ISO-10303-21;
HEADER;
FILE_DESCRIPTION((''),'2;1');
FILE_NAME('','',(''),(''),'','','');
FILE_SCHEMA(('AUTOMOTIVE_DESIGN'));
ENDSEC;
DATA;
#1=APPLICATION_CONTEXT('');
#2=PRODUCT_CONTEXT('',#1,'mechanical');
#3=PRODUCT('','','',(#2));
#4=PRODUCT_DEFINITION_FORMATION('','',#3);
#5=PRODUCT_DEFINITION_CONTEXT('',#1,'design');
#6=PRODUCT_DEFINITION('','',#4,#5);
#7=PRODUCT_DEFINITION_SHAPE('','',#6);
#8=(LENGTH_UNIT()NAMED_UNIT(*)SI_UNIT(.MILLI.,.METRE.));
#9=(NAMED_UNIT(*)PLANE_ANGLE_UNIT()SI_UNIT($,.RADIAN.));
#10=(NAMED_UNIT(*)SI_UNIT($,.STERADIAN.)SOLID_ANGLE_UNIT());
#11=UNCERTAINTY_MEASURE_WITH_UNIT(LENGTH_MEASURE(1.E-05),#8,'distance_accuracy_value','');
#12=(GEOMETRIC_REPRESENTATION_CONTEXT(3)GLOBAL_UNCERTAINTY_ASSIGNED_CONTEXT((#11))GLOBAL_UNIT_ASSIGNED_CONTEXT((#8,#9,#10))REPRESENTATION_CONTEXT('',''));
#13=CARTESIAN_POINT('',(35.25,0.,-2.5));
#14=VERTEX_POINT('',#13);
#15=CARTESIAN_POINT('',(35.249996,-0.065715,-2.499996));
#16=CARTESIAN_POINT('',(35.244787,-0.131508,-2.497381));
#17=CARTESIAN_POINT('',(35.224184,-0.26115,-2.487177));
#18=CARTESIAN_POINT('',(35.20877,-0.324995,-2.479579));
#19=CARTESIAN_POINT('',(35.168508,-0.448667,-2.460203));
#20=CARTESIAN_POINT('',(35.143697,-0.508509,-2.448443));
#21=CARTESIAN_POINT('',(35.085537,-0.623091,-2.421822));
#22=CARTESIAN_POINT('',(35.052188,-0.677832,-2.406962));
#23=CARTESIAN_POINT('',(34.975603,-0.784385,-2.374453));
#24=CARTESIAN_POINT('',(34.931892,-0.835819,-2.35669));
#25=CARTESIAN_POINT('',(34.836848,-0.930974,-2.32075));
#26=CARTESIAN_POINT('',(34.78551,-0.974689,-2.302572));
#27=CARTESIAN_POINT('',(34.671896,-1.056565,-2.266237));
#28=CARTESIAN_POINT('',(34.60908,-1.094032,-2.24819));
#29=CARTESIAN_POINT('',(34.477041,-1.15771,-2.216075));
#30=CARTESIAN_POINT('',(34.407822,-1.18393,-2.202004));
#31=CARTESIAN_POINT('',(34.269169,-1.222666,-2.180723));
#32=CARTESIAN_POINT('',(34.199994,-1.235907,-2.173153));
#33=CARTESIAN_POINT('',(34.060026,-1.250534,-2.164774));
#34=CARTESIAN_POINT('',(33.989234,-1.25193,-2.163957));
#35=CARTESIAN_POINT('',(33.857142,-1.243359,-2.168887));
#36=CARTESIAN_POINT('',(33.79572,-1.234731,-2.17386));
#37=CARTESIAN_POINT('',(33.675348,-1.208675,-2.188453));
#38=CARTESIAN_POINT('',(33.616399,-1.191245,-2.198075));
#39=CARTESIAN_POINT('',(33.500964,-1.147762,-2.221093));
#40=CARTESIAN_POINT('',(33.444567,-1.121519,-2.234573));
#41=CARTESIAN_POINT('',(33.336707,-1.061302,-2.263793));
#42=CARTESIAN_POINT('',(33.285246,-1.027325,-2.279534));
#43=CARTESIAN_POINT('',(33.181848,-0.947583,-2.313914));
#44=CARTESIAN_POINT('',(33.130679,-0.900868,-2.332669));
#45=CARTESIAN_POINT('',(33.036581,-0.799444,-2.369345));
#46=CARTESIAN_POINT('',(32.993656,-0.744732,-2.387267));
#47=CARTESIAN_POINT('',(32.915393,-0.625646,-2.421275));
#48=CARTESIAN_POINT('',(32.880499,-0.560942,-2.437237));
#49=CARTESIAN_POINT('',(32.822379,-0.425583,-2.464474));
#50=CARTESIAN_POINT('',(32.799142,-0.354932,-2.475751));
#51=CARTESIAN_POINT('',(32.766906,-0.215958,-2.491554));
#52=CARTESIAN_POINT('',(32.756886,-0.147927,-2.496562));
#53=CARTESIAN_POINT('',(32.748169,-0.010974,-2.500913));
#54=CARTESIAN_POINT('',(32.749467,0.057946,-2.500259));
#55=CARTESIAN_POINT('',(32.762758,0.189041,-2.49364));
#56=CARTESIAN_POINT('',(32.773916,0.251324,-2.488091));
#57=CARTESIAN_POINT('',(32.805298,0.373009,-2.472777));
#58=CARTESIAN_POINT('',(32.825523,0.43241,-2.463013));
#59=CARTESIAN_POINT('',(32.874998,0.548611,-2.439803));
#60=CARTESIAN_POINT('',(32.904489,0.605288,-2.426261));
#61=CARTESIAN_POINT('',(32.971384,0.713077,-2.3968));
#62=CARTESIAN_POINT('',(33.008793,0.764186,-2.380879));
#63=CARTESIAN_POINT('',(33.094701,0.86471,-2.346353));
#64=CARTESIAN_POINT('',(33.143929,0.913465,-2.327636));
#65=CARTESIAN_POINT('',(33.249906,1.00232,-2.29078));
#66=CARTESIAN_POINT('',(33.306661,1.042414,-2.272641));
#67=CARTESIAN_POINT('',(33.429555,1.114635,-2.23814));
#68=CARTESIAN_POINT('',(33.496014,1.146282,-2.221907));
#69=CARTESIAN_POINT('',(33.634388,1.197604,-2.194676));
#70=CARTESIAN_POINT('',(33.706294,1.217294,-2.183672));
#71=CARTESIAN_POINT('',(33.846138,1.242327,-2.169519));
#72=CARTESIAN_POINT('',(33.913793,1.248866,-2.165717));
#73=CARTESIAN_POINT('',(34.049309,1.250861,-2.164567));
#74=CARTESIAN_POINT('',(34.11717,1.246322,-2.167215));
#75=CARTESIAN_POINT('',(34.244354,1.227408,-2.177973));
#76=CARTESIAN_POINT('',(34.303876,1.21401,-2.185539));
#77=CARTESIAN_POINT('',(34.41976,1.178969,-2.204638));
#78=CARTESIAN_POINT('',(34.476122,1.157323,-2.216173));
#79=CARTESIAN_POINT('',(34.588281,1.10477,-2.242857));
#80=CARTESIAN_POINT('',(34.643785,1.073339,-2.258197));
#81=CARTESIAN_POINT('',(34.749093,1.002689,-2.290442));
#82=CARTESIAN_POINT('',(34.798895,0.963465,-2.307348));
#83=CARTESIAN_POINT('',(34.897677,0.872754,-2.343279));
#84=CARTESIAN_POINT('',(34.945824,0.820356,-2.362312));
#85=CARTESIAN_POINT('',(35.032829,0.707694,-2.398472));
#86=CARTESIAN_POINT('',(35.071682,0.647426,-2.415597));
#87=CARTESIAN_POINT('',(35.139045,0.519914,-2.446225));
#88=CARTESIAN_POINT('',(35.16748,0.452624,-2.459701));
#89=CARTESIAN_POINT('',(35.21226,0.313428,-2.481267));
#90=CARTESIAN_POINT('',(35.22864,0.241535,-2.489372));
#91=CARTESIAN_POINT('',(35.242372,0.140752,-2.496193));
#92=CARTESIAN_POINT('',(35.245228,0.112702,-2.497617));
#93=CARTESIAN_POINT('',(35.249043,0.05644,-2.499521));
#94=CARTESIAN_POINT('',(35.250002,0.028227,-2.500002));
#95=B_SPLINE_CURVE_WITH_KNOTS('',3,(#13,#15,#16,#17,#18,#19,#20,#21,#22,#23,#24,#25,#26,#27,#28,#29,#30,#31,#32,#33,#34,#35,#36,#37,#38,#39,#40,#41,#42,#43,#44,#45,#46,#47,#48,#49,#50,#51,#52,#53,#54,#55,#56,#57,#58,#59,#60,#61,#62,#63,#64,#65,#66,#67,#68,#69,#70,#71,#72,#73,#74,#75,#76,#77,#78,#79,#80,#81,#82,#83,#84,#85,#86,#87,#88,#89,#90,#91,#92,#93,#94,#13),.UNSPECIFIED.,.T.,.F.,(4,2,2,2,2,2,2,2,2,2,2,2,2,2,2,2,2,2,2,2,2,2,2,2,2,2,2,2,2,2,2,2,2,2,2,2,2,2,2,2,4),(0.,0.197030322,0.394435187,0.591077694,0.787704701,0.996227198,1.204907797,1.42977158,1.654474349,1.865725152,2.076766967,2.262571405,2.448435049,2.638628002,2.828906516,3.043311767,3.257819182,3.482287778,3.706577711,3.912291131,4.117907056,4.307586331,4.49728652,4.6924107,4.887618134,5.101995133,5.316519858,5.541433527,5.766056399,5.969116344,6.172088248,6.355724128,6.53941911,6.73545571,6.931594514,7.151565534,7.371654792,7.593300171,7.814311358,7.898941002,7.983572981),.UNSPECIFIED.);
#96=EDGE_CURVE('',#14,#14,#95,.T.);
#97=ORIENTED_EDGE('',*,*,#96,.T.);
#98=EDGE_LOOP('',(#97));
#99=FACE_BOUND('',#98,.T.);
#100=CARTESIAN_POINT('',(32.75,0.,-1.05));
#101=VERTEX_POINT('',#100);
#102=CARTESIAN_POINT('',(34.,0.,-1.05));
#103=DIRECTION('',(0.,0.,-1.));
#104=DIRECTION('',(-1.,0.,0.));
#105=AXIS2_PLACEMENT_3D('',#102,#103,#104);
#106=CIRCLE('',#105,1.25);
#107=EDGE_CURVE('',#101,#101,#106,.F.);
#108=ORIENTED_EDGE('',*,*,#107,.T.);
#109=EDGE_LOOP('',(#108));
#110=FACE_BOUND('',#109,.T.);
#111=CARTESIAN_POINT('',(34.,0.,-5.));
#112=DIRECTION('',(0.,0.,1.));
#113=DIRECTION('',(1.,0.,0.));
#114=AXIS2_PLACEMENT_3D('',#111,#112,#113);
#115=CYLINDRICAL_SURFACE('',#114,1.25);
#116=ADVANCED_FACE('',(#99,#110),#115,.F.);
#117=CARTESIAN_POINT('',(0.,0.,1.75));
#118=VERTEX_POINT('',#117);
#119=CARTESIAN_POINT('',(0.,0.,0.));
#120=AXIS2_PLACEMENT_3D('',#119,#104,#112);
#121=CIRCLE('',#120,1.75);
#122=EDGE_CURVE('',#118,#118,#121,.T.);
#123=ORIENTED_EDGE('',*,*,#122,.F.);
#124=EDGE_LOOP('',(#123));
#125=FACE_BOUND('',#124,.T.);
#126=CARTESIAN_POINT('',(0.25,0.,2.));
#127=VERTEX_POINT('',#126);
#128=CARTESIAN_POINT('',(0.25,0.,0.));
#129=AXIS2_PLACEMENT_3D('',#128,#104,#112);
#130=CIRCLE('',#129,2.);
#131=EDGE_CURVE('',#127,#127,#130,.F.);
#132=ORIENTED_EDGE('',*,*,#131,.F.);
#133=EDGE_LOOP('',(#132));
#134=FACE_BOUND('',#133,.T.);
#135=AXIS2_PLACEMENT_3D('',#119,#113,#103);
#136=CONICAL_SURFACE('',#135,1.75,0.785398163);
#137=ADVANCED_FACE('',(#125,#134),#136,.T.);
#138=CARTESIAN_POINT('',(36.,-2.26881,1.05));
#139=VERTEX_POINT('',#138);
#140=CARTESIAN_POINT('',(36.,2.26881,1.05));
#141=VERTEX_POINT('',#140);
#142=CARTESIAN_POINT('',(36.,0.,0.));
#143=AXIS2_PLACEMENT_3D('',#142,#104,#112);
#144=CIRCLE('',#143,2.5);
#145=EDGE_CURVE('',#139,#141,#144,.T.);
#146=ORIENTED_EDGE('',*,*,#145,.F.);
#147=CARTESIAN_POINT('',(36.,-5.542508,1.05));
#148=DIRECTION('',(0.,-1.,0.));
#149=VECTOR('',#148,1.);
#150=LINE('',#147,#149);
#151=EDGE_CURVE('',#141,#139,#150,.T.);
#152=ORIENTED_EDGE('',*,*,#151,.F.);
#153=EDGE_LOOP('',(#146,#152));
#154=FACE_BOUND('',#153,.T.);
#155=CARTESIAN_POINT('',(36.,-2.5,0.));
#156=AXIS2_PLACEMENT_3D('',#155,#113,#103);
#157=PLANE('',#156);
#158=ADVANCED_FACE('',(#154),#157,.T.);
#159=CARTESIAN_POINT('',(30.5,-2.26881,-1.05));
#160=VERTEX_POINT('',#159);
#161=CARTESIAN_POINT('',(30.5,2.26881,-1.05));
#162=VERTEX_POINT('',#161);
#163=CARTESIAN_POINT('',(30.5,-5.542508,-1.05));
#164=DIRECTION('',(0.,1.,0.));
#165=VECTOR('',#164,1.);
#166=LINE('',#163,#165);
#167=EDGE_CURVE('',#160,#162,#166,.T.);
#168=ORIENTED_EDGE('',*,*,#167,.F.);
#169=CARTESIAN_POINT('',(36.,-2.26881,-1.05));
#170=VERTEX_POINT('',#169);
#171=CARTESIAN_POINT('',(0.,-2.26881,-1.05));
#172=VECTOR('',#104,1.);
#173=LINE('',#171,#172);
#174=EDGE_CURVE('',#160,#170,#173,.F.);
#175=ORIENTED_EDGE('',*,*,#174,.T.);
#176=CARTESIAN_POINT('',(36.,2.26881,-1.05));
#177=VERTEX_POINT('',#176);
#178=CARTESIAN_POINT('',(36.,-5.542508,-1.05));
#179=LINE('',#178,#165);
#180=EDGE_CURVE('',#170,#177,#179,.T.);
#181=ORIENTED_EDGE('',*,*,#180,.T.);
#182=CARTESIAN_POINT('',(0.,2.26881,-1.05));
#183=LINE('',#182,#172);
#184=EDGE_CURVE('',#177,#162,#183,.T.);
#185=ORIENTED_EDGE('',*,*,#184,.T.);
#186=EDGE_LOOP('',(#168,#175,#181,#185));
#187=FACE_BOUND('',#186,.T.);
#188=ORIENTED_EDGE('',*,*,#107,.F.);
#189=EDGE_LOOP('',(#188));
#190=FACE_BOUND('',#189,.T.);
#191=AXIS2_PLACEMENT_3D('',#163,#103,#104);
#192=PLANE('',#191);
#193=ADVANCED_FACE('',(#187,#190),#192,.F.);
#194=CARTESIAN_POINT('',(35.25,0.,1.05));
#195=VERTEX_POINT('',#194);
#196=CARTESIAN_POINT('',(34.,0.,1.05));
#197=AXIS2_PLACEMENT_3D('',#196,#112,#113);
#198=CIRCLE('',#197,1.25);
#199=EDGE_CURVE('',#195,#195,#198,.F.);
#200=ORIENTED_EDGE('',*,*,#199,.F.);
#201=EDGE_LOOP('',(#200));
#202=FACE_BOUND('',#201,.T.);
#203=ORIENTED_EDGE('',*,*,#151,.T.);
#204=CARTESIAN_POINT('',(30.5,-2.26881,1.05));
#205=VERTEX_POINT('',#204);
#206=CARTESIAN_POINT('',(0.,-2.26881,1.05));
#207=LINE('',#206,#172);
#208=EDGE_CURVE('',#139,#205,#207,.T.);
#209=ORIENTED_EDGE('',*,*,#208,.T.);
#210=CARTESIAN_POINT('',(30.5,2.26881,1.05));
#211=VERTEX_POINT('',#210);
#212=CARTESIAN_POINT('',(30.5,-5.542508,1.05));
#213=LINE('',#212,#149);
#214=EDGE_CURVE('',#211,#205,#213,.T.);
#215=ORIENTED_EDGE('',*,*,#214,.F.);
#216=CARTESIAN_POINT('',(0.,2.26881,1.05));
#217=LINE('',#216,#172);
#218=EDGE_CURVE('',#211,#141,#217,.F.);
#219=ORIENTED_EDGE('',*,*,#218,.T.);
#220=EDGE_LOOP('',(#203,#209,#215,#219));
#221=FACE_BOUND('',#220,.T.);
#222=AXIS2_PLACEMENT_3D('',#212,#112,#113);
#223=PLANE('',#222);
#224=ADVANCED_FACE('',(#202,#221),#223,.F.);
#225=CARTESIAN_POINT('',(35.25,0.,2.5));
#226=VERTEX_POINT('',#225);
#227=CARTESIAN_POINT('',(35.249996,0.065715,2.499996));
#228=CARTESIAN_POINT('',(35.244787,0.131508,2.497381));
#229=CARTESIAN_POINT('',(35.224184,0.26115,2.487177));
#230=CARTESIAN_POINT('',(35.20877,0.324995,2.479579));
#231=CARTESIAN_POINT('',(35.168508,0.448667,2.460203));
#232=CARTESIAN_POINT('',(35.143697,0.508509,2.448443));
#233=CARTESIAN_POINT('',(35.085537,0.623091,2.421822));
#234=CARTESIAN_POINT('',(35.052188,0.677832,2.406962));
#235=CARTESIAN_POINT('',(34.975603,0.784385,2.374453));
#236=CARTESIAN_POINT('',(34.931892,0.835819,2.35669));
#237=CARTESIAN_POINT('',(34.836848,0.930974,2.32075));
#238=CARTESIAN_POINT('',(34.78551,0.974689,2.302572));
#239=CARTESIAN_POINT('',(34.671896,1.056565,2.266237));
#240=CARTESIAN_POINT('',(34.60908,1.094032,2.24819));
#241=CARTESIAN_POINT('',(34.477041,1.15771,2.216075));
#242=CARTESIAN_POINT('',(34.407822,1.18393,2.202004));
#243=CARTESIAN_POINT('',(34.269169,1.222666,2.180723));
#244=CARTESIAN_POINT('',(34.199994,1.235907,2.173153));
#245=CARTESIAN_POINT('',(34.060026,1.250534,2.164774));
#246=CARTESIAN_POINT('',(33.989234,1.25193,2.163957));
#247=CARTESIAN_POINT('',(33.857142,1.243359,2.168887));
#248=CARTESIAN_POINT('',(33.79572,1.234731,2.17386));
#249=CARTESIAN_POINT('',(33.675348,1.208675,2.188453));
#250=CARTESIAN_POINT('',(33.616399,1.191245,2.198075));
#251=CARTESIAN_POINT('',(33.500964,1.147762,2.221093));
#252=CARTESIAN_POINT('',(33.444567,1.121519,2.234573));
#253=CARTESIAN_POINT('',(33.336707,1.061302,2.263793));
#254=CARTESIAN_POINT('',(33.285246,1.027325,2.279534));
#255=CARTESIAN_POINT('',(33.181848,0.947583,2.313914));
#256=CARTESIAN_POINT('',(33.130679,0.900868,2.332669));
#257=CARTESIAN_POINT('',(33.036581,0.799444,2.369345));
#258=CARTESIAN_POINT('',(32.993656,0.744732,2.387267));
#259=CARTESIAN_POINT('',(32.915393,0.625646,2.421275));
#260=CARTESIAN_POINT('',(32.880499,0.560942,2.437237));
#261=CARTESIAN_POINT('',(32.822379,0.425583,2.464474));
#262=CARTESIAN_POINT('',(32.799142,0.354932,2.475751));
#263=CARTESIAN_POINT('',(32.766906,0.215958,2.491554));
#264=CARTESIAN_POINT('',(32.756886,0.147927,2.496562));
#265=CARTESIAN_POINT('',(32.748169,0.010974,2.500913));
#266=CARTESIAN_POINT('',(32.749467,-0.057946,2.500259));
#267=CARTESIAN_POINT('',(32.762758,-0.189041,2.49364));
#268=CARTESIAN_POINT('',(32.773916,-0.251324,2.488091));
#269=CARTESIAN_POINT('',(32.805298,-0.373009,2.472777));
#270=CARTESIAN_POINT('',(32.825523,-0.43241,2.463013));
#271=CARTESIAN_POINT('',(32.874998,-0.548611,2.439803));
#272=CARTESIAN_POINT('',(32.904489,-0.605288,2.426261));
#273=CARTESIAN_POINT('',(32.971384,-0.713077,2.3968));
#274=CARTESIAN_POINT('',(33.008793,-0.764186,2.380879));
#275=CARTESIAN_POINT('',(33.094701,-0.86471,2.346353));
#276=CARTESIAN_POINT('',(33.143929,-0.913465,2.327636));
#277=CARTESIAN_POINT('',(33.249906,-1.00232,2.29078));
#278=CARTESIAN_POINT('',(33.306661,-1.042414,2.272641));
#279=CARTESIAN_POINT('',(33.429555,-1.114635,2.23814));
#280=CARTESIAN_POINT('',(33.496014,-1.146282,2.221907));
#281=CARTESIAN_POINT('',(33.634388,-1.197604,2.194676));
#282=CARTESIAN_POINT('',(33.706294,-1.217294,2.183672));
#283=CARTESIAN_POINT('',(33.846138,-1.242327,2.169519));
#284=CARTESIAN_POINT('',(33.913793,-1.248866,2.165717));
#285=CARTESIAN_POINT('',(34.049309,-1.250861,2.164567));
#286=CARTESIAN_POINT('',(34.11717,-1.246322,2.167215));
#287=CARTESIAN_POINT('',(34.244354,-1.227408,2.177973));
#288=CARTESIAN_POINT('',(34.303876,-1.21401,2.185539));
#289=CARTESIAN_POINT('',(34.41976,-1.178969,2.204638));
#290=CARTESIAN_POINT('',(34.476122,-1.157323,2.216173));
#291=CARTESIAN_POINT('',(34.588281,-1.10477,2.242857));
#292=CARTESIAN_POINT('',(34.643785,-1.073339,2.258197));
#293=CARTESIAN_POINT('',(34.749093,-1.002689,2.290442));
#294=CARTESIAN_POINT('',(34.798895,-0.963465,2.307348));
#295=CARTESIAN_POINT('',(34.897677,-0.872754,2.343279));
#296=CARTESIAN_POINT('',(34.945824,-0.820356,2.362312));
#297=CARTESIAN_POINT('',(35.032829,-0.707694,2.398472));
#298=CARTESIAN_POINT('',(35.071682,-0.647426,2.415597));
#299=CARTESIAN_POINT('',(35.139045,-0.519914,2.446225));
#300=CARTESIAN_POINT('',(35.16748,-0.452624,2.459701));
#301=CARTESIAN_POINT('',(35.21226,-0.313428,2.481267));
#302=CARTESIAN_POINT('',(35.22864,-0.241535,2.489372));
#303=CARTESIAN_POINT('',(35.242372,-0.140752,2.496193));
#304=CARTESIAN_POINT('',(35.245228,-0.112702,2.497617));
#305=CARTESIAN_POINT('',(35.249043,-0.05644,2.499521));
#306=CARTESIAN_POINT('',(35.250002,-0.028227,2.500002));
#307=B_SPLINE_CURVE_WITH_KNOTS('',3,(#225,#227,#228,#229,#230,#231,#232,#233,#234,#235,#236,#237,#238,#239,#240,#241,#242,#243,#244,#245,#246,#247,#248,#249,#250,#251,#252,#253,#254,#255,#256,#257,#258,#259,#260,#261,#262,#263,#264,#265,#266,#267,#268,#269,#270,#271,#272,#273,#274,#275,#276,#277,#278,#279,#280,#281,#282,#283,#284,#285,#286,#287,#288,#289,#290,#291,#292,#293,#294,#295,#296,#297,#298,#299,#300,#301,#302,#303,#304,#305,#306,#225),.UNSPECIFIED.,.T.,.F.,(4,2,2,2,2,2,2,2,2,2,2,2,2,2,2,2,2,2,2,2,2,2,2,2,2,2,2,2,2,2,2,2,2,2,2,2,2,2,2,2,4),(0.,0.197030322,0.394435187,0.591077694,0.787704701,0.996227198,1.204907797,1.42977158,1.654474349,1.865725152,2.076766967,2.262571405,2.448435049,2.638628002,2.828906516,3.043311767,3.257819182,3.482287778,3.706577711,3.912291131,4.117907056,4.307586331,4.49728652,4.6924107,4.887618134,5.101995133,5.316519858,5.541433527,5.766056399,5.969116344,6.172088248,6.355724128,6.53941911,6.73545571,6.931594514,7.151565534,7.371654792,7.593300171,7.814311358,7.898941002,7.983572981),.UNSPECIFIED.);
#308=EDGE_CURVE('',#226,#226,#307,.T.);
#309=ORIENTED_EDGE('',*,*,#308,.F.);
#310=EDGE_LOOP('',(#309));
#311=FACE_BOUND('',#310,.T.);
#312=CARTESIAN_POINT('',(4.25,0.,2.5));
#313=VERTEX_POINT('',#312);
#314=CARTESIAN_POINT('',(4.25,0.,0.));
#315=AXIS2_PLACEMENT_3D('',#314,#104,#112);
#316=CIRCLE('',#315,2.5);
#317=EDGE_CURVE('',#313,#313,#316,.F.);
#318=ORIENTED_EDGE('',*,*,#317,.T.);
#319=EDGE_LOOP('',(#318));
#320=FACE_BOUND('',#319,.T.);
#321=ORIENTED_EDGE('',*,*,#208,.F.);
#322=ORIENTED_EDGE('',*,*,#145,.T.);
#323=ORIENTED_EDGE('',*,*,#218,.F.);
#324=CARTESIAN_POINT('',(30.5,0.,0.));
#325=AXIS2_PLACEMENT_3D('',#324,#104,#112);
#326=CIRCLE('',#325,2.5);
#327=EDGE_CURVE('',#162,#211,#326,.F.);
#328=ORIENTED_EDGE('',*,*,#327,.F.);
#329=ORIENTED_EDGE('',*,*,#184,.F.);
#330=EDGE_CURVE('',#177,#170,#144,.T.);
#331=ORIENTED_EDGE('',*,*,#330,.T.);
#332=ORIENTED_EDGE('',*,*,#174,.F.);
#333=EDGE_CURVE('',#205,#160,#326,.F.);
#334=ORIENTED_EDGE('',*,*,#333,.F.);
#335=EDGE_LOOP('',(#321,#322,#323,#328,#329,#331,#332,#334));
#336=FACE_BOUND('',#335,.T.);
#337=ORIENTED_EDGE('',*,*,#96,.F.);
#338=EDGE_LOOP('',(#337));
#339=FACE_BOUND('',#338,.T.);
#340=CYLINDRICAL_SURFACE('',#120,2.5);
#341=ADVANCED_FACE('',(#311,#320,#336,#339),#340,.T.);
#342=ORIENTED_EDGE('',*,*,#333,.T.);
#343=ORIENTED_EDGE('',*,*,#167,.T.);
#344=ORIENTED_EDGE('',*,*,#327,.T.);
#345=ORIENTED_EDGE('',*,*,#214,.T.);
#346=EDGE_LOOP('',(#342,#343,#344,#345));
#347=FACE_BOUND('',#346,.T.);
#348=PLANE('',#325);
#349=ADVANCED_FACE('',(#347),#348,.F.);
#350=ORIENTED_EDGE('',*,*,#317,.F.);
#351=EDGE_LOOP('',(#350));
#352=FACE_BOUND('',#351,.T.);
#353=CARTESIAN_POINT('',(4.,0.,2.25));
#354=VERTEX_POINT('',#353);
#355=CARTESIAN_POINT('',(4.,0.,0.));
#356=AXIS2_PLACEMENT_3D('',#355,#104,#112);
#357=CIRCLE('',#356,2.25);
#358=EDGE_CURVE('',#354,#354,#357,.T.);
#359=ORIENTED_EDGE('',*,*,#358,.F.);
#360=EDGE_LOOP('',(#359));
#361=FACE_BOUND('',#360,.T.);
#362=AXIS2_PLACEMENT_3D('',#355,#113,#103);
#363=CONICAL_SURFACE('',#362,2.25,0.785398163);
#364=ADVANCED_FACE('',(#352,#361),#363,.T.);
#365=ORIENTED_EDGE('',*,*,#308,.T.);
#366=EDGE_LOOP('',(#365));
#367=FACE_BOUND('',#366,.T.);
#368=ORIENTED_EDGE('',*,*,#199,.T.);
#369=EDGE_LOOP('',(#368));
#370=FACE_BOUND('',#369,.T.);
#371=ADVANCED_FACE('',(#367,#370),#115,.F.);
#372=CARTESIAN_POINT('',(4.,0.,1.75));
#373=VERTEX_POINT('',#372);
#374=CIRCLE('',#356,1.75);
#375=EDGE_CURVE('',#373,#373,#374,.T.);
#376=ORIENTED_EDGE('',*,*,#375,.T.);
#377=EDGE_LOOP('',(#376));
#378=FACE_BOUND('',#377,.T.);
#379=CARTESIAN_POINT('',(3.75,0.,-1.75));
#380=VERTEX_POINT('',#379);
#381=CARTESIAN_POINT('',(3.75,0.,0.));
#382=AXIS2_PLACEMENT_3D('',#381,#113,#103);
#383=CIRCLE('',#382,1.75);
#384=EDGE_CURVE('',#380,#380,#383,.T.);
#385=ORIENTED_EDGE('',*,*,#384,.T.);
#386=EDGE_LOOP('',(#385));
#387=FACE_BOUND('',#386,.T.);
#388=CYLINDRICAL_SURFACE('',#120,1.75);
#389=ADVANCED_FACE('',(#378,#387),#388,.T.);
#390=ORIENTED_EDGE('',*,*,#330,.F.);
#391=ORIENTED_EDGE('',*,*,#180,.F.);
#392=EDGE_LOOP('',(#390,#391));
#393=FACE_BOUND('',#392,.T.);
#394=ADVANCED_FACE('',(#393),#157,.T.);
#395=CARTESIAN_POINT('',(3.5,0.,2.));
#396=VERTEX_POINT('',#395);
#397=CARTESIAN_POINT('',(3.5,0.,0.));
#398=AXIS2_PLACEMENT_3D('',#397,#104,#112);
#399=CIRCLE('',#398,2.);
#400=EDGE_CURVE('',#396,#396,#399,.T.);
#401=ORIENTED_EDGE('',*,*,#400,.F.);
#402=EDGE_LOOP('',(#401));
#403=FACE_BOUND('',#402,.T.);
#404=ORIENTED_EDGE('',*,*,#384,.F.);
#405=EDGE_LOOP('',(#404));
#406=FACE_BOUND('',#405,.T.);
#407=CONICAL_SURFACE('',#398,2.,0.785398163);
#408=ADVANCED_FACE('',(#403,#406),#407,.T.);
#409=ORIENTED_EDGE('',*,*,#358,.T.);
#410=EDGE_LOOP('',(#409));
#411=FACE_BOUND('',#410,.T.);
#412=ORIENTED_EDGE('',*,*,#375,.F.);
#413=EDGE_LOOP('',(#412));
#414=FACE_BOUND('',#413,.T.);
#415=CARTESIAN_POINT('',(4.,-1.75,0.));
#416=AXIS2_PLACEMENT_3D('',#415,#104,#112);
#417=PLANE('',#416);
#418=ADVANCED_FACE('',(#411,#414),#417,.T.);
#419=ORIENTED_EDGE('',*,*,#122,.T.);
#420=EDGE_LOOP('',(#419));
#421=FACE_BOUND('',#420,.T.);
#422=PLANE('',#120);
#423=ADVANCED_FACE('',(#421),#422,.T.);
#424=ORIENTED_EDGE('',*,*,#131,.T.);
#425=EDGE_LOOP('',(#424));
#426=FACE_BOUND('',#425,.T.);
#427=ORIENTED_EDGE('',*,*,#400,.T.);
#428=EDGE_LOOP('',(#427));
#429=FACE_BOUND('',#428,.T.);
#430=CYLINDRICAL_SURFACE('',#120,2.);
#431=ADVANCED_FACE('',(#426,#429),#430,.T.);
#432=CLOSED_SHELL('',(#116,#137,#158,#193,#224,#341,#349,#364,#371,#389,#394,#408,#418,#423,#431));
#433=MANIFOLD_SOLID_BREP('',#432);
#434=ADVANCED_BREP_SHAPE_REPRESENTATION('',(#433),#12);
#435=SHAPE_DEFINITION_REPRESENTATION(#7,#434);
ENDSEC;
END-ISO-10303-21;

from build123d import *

# Parameters (mm, degrees)
SKETCH2_R          = 1.25
CUT_EXTRUDE1_DEPTH = 5
SKETCH3_W          = 2.1
SKETCH3_H          = 11.085015624
CUT_EXTRUDE2_DEPTH = 5.5
CHAMFER1_SIZE      = 0.25


with BuildPart() as part:
    # Sketch1 → Revolve1 (revolve)
    with BuildSketch(Plane.XY, mode=Mode.PRIVATE) as revolve1_sk:
        Polygon((0, 0), (36, 0), (36, -2.5), (4, -2.5), (4, -1.75), (3.5, -1.75), (3.5, -2), (0, -2), align=None)
    revolve(revolve1_sk.sketch.rotate(Axis((0, 0, 0), (1, 0, 0)), 270), axis=Axis((0, 0, 0), (1, 0, 0)))

    # Sketch2 → Cut-Extrude1 (cut, symmetric)
    with BuildSketch(Plane.XY):
        with Locations((34, 0)):
            Circle(SKETCH2_R)
    extrude(amount=CUT_EXTRUDE1_DEPTH, both=True, mode=Mode.SUBTRACT)

    # Sketch3 → Cut-Extrude2 (cut)
    with BuildSketch(Plane(origin=(36, 0, 0), x_dir=(0, 0, -1), z_dir=(1, 0, 0))):
        Rectangle(SKETCH3_W, SKETCH3_H)
    extrude(amount=-CUT_EXTRUDE2_DEPTH, mode=Mode.SUBTRACT)

    # Chamfer1
    chamfer1_edges = [part.edges().sort_by_distance(p)[0] for p in [
        (0, 0, -2),
        (4, 0, -2.5),
        (3.5, 0, -1.75),
    ]]
    chamfer(chamfer1_edges, length=CHAMFER1_SIZE - 0.0001)  # a hair under: the kernel refuses the full size


solid = part.part
